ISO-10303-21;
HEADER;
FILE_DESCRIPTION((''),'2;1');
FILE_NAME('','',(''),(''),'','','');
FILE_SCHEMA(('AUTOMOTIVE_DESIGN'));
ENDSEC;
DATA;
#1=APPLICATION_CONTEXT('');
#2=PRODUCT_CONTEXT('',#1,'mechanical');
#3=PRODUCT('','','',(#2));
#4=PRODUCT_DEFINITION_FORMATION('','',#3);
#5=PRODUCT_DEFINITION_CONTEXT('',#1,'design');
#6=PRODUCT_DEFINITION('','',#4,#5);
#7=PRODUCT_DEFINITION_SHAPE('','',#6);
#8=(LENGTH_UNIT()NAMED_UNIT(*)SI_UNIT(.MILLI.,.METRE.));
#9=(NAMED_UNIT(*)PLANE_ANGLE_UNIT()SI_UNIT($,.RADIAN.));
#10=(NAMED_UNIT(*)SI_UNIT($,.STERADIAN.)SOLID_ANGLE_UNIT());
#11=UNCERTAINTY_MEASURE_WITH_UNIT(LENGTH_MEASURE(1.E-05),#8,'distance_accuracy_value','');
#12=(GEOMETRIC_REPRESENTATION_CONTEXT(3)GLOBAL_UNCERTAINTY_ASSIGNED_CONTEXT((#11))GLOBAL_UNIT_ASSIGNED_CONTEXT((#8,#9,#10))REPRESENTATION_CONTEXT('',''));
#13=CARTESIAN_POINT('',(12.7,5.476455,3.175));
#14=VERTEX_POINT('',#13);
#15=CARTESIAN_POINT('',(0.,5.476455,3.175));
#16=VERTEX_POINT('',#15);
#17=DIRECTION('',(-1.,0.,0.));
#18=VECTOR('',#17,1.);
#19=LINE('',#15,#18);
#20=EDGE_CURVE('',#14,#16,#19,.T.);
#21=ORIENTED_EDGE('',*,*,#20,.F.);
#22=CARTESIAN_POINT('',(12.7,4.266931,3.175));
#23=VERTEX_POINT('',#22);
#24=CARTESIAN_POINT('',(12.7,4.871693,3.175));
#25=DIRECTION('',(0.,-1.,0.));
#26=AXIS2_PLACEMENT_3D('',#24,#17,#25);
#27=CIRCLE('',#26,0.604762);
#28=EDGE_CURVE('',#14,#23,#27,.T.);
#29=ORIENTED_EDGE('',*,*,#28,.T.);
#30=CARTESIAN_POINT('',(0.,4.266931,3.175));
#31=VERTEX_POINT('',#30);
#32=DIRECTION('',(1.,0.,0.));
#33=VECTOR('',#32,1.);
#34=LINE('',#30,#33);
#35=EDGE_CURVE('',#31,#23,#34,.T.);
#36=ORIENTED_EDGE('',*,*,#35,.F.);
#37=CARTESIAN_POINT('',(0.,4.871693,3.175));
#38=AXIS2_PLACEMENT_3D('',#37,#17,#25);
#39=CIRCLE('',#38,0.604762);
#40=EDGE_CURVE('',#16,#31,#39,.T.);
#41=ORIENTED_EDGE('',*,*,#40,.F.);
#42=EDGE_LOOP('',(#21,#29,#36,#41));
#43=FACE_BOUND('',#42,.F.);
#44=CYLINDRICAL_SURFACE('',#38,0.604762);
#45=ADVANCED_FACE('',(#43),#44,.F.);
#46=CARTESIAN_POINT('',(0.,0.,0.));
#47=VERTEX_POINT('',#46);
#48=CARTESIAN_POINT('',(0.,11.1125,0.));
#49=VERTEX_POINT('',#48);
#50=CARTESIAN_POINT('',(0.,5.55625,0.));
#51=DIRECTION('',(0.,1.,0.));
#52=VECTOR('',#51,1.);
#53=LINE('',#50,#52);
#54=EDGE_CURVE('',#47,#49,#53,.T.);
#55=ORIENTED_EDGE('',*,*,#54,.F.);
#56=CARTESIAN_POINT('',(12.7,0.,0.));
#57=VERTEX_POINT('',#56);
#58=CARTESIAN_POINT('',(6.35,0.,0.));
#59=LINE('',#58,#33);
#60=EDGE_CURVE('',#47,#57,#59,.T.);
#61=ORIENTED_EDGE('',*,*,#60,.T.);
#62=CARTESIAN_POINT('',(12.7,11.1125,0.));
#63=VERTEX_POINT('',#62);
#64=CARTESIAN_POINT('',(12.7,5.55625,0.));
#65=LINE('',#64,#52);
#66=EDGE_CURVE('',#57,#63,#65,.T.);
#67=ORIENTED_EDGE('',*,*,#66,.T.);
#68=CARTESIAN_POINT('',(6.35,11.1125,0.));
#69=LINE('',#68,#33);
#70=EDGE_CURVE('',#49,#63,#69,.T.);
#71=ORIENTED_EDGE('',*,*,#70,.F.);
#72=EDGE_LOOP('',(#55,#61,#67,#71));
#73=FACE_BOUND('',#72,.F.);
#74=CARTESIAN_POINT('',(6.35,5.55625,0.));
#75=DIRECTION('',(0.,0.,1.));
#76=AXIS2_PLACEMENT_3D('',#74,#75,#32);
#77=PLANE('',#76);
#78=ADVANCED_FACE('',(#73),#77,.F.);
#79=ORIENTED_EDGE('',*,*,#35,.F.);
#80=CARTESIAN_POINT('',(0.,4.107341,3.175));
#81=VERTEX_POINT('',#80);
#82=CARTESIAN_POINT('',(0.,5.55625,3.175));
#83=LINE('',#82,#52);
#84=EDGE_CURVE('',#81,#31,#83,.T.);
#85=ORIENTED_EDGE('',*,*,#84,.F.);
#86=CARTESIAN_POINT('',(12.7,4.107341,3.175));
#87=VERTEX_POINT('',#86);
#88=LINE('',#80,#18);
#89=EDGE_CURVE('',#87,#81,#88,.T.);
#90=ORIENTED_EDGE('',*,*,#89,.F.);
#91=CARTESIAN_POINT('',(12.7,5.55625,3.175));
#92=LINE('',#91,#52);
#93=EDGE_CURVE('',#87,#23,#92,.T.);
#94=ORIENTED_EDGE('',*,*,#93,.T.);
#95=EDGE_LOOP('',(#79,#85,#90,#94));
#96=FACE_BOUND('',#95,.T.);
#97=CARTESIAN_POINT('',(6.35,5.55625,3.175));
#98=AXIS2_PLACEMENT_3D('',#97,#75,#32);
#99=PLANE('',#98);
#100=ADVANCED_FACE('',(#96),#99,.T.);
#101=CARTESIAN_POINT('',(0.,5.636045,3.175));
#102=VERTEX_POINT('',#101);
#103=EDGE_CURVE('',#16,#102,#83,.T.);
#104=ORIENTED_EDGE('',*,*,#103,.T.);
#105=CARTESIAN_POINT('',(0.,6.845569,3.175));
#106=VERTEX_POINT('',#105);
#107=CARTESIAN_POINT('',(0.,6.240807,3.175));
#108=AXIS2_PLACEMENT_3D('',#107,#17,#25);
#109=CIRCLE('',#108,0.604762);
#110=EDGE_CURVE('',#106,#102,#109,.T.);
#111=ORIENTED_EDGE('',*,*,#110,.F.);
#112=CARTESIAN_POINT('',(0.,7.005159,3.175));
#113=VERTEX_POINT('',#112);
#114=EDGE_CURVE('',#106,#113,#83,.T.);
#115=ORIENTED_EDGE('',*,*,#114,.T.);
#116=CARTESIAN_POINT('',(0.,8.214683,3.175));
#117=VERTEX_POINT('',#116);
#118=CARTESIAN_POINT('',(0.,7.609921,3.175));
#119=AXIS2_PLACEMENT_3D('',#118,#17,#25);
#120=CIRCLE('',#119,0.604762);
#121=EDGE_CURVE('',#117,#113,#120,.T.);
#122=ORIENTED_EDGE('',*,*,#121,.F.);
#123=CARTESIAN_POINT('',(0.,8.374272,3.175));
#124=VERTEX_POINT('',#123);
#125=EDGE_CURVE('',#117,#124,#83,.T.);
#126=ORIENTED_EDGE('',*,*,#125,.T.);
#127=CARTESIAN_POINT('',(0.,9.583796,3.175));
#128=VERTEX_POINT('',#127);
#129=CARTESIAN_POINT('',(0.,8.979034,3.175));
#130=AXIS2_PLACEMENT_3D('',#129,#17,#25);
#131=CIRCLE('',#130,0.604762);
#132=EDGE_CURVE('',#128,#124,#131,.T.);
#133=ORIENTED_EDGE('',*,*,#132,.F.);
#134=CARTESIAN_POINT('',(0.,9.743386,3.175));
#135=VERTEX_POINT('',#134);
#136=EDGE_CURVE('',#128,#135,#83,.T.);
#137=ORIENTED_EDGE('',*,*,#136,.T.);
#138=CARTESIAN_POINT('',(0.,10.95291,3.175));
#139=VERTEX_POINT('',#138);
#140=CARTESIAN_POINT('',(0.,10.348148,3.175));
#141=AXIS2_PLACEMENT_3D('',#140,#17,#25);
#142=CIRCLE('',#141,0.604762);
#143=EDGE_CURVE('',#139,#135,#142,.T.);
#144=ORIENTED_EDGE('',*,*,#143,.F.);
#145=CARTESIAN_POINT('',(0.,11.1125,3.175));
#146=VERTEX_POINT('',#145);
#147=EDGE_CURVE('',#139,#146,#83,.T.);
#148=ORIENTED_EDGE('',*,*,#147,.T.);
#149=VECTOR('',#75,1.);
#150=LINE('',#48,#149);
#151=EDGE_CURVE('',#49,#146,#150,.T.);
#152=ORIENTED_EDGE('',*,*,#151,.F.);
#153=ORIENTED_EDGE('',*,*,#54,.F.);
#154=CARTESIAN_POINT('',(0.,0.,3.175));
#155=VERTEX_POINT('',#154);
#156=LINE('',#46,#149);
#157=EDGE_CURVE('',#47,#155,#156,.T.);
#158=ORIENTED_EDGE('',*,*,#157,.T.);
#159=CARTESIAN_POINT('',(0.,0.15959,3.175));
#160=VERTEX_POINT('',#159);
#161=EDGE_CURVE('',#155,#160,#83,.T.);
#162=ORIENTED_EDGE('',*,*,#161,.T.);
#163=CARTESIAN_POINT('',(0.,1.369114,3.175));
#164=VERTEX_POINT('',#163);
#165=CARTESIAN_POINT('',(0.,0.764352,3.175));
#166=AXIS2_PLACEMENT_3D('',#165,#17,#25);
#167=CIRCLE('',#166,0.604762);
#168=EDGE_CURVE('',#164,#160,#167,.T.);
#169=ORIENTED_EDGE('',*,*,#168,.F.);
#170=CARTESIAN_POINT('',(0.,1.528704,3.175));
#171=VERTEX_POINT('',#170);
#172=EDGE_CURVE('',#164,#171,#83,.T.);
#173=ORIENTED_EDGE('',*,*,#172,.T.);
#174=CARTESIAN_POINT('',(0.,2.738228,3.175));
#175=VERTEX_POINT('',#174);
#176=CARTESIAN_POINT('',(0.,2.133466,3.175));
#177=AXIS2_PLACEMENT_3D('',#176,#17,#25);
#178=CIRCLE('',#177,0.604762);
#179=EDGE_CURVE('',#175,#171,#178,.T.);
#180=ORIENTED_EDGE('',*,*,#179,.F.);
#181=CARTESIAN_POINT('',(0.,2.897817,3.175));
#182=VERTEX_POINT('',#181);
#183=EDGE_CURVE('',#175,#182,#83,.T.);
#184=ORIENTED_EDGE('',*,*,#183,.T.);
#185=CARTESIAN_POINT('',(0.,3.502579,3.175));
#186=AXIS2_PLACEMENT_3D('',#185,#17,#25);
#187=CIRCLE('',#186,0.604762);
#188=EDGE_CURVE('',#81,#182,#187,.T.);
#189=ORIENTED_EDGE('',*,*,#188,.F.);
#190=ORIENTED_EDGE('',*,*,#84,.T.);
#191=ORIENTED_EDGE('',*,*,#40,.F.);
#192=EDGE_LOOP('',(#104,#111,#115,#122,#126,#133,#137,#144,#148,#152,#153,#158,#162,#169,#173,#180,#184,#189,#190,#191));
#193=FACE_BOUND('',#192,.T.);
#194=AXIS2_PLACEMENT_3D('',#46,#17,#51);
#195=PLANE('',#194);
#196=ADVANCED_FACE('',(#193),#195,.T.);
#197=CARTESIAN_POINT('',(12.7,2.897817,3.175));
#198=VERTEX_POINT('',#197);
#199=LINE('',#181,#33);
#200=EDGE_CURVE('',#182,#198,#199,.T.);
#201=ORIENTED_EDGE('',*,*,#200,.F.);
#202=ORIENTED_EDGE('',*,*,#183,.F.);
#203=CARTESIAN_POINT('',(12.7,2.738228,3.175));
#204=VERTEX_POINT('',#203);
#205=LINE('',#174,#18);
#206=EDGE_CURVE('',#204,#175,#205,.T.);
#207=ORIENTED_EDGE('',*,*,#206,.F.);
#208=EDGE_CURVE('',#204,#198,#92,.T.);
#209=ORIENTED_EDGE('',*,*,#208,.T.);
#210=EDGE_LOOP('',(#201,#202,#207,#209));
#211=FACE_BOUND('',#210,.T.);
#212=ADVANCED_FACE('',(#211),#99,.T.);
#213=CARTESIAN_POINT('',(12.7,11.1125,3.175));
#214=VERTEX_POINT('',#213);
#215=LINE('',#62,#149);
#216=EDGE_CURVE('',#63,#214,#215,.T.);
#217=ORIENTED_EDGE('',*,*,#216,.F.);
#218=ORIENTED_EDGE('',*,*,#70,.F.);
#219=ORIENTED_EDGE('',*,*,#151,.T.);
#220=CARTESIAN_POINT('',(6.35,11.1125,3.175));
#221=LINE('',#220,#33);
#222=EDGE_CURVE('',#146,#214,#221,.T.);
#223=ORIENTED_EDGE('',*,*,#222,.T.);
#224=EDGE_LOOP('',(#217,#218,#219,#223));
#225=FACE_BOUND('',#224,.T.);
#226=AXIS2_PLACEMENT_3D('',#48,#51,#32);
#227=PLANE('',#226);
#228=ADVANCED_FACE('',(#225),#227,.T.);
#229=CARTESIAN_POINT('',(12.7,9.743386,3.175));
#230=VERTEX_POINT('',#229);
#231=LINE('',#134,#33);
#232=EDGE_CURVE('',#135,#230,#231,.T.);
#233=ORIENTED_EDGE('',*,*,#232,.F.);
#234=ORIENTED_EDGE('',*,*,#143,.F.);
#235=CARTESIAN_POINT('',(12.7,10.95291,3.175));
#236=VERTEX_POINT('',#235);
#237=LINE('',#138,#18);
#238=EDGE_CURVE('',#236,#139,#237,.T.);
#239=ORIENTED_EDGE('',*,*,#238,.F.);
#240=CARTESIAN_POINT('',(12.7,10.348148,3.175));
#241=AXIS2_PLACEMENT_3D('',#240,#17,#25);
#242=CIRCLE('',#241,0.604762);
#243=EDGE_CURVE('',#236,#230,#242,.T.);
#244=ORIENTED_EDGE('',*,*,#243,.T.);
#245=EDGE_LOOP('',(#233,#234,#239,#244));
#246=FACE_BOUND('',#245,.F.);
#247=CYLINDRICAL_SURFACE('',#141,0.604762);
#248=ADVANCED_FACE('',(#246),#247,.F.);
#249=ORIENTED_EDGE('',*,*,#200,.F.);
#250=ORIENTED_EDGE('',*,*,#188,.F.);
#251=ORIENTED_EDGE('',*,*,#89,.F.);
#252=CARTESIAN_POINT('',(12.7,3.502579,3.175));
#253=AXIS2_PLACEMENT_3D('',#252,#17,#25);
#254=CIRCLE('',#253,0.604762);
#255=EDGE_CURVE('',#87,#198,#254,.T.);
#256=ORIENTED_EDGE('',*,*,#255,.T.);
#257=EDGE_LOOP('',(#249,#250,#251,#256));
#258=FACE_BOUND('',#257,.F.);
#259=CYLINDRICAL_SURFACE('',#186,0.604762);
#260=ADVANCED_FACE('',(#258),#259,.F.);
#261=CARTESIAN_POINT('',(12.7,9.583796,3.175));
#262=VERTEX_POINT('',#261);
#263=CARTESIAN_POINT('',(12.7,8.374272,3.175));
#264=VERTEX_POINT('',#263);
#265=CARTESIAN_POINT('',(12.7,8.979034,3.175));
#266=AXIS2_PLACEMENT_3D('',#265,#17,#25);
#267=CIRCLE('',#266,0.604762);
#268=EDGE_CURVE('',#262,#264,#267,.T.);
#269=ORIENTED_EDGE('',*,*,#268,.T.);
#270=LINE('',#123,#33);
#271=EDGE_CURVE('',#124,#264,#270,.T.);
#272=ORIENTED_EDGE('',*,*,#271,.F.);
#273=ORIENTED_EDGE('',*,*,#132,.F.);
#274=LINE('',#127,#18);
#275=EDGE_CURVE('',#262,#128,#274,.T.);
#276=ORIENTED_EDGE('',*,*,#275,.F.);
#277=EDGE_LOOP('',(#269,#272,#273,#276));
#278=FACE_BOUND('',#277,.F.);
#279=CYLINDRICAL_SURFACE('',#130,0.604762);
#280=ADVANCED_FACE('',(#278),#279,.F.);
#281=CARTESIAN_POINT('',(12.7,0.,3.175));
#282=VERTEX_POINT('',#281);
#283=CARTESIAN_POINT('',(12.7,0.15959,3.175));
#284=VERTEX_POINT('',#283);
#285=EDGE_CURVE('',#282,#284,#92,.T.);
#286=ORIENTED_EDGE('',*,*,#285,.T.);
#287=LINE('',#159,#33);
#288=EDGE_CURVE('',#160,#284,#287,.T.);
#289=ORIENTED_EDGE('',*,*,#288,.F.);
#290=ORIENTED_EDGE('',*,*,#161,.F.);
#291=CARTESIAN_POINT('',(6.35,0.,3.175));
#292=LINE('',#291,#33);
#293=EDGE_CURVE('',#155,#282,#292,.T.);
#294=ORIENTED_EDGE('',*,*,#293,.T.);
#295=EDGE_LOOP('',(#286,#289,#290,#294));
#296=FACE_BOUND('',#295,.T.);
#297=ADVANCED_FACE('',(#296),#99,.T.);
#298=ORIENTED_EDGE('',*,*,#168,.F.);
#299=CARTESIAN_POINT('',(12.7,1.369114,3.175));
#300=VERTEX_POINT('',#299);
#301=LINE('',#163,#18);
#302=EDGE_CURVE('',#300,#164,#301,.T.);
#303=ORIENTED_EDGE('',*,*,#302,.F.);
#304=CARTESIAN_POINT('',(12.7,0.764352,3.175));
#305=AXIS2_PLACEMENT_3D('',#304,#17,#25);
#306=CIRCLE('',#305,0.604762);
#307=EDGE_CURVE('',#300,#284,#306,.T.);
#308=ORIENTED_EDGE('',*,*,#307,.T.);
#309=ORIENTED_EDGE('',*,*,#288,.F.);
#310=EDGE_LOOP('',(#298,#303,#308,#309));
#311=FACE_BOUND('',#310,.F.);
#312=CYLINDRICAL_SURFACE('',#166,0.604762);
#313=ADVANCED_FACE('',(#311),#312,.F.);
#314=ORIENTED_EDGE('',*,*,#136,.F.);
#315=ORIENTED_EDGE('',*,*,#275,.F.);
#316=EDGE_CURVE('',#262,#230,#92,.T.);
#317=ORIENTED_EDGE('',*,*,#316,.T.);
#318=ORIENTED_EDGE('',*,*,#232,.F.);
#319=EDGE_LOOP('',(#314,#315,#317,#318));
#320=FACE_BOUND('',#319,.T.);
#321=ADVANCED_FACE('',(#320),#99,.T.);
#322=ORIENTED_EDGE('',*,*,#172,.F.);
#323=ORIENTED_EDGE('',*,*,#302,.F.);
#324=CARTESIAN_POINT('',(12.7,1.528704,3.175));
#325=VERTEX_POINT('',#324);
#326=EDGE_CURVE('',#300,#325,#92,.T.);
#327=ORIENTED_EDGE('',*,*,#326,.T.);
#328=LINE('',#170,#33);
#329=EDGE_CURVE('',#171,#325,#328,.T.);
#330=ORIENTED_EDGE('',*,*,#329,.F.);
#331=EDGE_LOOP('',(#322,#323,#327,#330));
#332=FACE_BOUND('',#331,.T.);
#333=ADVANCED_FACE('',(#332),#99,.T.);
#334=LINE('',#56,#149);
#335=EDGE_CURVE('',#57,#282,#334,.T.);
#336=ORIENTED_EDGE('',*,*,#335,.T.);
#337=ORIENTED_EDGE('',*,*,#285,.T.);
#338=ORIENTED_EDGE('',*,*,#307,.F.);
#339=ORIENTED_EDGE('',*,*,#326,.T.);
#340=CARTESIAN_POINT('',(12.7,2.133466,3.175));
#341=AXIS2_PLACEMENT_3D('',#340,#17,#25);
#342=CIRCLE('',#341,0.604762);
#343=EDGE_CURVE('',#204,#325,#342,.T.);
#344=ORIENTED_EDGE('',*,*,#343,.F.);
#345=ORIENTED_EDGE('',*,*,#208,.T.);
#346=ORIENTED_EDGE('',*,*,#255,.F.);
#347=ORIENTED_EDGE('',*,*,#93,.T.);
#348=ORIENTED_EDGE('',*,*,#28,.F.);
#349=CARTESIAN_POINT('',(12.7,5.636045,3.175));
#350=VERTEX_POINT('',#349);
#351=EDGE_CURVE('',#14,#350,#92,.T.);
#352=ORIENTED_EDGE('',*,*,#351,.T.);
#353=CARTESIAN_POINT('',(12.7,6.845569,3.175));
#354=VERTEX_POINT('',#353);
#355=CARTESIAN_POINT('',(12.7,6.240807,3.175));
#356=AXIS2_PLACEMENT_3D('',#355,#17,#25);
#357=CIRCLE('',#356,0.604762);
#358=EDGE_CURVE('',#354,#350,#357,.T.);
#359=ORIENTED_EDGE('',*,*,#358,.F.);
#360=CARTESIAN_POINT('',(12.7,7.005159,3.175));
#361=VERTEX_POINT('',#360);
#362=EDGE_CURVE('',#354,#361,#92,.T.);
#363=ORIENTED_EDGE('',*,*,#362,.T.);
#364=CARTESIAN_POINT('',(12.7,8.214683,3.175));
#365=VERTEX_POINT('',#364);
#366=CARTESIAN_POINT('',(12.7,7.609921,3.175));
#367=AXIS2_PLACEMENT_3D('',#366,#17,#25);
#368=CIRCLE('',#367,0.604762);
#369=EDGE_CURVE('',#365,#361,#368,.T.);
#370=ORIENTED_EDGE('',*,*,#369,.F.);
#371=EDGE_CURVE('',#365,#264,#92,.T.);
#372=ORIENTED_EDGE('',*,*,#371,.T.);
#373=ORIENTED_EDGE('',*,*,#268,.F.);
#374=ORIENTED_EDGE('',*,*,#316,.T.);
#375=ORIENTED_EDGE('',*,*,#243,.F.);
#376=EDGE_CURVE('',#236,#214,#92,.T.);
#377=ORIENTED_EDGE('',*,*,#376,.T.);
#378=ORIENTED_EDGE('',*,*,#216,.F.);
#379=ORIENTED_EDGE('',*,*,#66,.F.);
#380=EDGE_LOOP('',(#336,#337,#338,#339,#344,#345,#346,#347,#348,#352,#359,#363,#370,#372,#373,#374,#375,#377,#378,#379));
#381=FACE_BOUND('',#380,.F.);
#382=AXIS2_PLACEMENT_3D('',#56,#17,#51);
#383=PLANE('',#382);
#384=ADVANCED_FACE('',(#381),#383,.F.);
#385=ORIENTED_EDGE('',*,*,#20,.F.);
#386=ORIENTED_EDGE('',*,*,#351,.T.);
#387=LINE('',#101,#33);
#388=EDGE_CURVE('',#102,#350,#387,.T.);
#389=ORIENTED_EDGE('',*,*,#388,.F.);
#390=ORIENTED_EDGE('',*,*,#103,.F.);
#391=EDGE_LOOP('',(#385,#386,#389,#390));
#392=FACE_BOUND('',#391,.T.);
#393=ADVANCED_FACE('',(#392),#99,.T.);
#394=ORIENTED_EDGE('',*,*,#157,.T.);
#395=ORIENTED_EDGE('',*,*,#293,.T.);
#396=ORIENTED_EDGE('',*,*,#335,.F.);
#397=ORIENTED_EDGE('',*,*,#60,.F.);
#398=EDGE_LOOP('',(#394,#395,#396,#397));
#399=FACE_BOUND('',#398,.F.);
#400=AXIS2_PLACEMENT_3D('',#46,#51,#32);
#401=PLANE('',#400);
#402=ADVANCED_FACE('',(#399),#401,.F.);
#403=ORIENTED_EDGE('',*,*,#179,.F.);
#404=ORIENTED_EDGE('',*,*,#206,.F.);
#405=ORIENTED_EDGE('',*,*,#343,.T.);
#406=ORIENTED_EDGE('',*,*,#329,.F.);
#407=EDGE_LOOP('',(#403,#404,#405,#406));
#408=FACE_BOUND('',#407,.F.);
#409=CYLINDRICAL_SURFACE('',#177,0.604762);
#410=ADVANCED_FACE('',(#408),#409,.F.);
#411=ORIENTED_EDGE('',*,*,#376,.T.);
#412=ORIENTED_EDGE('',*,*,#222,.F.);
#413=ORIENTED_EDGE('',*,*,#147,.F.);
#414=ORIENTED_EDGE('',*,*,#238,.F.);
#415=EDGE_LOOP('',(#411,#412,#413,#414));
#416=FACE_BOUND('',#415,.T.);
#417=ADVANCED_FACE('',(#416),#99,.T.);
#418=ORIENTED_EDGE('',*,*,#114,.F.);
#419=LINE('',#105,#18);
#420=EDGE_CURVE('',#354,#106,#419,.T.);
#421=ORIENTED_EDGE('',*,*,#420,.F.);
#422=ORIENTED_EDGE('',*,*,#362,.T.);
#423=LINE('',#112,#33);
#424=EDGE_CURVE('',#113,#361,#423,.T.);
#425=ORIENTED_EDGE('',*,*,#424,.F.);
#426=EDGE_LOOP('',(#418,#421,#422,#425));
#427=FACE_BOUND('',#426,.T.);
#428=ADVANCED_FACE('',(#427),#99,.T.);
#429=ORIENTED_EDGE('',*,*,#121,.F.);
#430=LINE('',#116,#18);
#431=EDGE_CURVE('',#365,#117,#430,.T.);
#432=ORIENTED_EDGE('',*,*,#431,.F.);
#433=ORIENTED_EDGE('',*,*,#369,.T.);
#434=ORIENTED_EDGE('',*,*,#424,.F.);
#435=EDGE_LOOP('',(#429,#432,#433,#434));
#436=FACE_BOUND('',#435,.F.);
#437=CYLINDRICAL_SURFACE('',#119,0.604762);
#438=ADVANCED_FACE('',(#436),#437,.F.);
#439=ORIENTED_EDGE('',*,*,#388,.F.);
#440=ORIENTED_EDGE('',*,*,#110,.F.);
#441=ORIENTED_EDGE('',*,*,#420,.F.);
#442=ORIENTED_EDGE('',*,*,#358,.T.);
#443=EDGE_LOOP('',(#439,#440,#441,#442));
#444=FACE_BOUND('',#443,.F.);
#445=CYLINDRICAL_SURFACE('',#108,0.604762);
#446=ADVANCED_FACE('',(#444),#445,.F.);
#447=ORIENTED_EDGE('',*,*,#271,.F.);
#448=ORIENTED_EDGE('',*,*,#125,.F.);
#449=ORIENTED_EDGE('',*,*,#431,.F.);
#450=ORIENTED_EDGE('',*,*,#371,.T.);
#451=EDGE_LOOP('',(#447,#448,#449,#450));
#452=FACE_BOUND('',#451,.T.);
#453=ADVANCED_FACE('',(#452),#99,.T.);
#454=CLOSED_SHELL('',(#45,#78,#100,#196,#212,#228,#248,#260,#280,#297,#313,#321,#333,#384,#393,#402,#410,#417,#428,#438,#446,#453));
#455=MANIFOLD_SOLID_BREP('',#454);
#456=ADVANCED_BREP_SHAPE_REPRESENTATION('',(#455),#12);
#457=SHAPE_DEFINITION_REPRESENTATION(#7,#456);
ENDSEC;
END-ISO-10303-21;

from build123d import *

# Parameters (mm, degrees)
F0_W     = 12.7
F0_H     = 11.1125
F1_DEPTH = 6.35
F2_R     = 0.6047619048
F3_DEPTH = 12.701
F4_DEPTH = 3.175


# Not quite as in the source:
# - a length typed as a fraction of an inch, garbled in the dataset ("3 / 203.2 mm" for 3/8 in), is restored


with BuildPart() as f1:
    # F0 (on Top) → F1 (new body)
    with BuildSketch(Plane.XY):
        with Locations((6.35, 5.55625)):
            Rectangle(F0_W, F0_H)
    extrude(amount=F1_DEPTH)

    # F2 (on face) → F3 (cut, through all)
    with BuildSketch(Plane(origin=(0, 0, 0), x_dir=(0, -1, 0), z_dir=(-1, 0, 0))):
        with Locations((-10.3481481481, 3.175)):
            Circle(F2_R)
        with Locations((-8.9790343915, 3.175)):
            Circle(F2_R)
        with Locations((-7.6099206349, 3.175)):
            Circle(F2_R)
        with Locations((-6.2408068783, 3.175)):
            Circle(F2_R)
        with Locations((-4.8716931217, 3.175)):
            Circle(F2_R)
        with Locations((-3.5025793651, 3.175)):
            Circle(F2_R)
        with Locations((-2.1334656085, 3.175)):
            Circle(F2_R)
        with Locations((-0.7643518519, 3.175)):
            Circle(F2_R)
    extrude(amount=-F3_DEPTH, mode=Mode.SUBTRACT)

    # F4 (cut): a face of the model
    f4_faces = [f1.faces().sort_by_distance(p)[0] for p in [
        (6.35, 5.55625, 6.35),
    ]]
    extrude(f4_faces, amount=-F4_DEPTH, mode=Mode.SUBTRACT)


solid = f1.part
